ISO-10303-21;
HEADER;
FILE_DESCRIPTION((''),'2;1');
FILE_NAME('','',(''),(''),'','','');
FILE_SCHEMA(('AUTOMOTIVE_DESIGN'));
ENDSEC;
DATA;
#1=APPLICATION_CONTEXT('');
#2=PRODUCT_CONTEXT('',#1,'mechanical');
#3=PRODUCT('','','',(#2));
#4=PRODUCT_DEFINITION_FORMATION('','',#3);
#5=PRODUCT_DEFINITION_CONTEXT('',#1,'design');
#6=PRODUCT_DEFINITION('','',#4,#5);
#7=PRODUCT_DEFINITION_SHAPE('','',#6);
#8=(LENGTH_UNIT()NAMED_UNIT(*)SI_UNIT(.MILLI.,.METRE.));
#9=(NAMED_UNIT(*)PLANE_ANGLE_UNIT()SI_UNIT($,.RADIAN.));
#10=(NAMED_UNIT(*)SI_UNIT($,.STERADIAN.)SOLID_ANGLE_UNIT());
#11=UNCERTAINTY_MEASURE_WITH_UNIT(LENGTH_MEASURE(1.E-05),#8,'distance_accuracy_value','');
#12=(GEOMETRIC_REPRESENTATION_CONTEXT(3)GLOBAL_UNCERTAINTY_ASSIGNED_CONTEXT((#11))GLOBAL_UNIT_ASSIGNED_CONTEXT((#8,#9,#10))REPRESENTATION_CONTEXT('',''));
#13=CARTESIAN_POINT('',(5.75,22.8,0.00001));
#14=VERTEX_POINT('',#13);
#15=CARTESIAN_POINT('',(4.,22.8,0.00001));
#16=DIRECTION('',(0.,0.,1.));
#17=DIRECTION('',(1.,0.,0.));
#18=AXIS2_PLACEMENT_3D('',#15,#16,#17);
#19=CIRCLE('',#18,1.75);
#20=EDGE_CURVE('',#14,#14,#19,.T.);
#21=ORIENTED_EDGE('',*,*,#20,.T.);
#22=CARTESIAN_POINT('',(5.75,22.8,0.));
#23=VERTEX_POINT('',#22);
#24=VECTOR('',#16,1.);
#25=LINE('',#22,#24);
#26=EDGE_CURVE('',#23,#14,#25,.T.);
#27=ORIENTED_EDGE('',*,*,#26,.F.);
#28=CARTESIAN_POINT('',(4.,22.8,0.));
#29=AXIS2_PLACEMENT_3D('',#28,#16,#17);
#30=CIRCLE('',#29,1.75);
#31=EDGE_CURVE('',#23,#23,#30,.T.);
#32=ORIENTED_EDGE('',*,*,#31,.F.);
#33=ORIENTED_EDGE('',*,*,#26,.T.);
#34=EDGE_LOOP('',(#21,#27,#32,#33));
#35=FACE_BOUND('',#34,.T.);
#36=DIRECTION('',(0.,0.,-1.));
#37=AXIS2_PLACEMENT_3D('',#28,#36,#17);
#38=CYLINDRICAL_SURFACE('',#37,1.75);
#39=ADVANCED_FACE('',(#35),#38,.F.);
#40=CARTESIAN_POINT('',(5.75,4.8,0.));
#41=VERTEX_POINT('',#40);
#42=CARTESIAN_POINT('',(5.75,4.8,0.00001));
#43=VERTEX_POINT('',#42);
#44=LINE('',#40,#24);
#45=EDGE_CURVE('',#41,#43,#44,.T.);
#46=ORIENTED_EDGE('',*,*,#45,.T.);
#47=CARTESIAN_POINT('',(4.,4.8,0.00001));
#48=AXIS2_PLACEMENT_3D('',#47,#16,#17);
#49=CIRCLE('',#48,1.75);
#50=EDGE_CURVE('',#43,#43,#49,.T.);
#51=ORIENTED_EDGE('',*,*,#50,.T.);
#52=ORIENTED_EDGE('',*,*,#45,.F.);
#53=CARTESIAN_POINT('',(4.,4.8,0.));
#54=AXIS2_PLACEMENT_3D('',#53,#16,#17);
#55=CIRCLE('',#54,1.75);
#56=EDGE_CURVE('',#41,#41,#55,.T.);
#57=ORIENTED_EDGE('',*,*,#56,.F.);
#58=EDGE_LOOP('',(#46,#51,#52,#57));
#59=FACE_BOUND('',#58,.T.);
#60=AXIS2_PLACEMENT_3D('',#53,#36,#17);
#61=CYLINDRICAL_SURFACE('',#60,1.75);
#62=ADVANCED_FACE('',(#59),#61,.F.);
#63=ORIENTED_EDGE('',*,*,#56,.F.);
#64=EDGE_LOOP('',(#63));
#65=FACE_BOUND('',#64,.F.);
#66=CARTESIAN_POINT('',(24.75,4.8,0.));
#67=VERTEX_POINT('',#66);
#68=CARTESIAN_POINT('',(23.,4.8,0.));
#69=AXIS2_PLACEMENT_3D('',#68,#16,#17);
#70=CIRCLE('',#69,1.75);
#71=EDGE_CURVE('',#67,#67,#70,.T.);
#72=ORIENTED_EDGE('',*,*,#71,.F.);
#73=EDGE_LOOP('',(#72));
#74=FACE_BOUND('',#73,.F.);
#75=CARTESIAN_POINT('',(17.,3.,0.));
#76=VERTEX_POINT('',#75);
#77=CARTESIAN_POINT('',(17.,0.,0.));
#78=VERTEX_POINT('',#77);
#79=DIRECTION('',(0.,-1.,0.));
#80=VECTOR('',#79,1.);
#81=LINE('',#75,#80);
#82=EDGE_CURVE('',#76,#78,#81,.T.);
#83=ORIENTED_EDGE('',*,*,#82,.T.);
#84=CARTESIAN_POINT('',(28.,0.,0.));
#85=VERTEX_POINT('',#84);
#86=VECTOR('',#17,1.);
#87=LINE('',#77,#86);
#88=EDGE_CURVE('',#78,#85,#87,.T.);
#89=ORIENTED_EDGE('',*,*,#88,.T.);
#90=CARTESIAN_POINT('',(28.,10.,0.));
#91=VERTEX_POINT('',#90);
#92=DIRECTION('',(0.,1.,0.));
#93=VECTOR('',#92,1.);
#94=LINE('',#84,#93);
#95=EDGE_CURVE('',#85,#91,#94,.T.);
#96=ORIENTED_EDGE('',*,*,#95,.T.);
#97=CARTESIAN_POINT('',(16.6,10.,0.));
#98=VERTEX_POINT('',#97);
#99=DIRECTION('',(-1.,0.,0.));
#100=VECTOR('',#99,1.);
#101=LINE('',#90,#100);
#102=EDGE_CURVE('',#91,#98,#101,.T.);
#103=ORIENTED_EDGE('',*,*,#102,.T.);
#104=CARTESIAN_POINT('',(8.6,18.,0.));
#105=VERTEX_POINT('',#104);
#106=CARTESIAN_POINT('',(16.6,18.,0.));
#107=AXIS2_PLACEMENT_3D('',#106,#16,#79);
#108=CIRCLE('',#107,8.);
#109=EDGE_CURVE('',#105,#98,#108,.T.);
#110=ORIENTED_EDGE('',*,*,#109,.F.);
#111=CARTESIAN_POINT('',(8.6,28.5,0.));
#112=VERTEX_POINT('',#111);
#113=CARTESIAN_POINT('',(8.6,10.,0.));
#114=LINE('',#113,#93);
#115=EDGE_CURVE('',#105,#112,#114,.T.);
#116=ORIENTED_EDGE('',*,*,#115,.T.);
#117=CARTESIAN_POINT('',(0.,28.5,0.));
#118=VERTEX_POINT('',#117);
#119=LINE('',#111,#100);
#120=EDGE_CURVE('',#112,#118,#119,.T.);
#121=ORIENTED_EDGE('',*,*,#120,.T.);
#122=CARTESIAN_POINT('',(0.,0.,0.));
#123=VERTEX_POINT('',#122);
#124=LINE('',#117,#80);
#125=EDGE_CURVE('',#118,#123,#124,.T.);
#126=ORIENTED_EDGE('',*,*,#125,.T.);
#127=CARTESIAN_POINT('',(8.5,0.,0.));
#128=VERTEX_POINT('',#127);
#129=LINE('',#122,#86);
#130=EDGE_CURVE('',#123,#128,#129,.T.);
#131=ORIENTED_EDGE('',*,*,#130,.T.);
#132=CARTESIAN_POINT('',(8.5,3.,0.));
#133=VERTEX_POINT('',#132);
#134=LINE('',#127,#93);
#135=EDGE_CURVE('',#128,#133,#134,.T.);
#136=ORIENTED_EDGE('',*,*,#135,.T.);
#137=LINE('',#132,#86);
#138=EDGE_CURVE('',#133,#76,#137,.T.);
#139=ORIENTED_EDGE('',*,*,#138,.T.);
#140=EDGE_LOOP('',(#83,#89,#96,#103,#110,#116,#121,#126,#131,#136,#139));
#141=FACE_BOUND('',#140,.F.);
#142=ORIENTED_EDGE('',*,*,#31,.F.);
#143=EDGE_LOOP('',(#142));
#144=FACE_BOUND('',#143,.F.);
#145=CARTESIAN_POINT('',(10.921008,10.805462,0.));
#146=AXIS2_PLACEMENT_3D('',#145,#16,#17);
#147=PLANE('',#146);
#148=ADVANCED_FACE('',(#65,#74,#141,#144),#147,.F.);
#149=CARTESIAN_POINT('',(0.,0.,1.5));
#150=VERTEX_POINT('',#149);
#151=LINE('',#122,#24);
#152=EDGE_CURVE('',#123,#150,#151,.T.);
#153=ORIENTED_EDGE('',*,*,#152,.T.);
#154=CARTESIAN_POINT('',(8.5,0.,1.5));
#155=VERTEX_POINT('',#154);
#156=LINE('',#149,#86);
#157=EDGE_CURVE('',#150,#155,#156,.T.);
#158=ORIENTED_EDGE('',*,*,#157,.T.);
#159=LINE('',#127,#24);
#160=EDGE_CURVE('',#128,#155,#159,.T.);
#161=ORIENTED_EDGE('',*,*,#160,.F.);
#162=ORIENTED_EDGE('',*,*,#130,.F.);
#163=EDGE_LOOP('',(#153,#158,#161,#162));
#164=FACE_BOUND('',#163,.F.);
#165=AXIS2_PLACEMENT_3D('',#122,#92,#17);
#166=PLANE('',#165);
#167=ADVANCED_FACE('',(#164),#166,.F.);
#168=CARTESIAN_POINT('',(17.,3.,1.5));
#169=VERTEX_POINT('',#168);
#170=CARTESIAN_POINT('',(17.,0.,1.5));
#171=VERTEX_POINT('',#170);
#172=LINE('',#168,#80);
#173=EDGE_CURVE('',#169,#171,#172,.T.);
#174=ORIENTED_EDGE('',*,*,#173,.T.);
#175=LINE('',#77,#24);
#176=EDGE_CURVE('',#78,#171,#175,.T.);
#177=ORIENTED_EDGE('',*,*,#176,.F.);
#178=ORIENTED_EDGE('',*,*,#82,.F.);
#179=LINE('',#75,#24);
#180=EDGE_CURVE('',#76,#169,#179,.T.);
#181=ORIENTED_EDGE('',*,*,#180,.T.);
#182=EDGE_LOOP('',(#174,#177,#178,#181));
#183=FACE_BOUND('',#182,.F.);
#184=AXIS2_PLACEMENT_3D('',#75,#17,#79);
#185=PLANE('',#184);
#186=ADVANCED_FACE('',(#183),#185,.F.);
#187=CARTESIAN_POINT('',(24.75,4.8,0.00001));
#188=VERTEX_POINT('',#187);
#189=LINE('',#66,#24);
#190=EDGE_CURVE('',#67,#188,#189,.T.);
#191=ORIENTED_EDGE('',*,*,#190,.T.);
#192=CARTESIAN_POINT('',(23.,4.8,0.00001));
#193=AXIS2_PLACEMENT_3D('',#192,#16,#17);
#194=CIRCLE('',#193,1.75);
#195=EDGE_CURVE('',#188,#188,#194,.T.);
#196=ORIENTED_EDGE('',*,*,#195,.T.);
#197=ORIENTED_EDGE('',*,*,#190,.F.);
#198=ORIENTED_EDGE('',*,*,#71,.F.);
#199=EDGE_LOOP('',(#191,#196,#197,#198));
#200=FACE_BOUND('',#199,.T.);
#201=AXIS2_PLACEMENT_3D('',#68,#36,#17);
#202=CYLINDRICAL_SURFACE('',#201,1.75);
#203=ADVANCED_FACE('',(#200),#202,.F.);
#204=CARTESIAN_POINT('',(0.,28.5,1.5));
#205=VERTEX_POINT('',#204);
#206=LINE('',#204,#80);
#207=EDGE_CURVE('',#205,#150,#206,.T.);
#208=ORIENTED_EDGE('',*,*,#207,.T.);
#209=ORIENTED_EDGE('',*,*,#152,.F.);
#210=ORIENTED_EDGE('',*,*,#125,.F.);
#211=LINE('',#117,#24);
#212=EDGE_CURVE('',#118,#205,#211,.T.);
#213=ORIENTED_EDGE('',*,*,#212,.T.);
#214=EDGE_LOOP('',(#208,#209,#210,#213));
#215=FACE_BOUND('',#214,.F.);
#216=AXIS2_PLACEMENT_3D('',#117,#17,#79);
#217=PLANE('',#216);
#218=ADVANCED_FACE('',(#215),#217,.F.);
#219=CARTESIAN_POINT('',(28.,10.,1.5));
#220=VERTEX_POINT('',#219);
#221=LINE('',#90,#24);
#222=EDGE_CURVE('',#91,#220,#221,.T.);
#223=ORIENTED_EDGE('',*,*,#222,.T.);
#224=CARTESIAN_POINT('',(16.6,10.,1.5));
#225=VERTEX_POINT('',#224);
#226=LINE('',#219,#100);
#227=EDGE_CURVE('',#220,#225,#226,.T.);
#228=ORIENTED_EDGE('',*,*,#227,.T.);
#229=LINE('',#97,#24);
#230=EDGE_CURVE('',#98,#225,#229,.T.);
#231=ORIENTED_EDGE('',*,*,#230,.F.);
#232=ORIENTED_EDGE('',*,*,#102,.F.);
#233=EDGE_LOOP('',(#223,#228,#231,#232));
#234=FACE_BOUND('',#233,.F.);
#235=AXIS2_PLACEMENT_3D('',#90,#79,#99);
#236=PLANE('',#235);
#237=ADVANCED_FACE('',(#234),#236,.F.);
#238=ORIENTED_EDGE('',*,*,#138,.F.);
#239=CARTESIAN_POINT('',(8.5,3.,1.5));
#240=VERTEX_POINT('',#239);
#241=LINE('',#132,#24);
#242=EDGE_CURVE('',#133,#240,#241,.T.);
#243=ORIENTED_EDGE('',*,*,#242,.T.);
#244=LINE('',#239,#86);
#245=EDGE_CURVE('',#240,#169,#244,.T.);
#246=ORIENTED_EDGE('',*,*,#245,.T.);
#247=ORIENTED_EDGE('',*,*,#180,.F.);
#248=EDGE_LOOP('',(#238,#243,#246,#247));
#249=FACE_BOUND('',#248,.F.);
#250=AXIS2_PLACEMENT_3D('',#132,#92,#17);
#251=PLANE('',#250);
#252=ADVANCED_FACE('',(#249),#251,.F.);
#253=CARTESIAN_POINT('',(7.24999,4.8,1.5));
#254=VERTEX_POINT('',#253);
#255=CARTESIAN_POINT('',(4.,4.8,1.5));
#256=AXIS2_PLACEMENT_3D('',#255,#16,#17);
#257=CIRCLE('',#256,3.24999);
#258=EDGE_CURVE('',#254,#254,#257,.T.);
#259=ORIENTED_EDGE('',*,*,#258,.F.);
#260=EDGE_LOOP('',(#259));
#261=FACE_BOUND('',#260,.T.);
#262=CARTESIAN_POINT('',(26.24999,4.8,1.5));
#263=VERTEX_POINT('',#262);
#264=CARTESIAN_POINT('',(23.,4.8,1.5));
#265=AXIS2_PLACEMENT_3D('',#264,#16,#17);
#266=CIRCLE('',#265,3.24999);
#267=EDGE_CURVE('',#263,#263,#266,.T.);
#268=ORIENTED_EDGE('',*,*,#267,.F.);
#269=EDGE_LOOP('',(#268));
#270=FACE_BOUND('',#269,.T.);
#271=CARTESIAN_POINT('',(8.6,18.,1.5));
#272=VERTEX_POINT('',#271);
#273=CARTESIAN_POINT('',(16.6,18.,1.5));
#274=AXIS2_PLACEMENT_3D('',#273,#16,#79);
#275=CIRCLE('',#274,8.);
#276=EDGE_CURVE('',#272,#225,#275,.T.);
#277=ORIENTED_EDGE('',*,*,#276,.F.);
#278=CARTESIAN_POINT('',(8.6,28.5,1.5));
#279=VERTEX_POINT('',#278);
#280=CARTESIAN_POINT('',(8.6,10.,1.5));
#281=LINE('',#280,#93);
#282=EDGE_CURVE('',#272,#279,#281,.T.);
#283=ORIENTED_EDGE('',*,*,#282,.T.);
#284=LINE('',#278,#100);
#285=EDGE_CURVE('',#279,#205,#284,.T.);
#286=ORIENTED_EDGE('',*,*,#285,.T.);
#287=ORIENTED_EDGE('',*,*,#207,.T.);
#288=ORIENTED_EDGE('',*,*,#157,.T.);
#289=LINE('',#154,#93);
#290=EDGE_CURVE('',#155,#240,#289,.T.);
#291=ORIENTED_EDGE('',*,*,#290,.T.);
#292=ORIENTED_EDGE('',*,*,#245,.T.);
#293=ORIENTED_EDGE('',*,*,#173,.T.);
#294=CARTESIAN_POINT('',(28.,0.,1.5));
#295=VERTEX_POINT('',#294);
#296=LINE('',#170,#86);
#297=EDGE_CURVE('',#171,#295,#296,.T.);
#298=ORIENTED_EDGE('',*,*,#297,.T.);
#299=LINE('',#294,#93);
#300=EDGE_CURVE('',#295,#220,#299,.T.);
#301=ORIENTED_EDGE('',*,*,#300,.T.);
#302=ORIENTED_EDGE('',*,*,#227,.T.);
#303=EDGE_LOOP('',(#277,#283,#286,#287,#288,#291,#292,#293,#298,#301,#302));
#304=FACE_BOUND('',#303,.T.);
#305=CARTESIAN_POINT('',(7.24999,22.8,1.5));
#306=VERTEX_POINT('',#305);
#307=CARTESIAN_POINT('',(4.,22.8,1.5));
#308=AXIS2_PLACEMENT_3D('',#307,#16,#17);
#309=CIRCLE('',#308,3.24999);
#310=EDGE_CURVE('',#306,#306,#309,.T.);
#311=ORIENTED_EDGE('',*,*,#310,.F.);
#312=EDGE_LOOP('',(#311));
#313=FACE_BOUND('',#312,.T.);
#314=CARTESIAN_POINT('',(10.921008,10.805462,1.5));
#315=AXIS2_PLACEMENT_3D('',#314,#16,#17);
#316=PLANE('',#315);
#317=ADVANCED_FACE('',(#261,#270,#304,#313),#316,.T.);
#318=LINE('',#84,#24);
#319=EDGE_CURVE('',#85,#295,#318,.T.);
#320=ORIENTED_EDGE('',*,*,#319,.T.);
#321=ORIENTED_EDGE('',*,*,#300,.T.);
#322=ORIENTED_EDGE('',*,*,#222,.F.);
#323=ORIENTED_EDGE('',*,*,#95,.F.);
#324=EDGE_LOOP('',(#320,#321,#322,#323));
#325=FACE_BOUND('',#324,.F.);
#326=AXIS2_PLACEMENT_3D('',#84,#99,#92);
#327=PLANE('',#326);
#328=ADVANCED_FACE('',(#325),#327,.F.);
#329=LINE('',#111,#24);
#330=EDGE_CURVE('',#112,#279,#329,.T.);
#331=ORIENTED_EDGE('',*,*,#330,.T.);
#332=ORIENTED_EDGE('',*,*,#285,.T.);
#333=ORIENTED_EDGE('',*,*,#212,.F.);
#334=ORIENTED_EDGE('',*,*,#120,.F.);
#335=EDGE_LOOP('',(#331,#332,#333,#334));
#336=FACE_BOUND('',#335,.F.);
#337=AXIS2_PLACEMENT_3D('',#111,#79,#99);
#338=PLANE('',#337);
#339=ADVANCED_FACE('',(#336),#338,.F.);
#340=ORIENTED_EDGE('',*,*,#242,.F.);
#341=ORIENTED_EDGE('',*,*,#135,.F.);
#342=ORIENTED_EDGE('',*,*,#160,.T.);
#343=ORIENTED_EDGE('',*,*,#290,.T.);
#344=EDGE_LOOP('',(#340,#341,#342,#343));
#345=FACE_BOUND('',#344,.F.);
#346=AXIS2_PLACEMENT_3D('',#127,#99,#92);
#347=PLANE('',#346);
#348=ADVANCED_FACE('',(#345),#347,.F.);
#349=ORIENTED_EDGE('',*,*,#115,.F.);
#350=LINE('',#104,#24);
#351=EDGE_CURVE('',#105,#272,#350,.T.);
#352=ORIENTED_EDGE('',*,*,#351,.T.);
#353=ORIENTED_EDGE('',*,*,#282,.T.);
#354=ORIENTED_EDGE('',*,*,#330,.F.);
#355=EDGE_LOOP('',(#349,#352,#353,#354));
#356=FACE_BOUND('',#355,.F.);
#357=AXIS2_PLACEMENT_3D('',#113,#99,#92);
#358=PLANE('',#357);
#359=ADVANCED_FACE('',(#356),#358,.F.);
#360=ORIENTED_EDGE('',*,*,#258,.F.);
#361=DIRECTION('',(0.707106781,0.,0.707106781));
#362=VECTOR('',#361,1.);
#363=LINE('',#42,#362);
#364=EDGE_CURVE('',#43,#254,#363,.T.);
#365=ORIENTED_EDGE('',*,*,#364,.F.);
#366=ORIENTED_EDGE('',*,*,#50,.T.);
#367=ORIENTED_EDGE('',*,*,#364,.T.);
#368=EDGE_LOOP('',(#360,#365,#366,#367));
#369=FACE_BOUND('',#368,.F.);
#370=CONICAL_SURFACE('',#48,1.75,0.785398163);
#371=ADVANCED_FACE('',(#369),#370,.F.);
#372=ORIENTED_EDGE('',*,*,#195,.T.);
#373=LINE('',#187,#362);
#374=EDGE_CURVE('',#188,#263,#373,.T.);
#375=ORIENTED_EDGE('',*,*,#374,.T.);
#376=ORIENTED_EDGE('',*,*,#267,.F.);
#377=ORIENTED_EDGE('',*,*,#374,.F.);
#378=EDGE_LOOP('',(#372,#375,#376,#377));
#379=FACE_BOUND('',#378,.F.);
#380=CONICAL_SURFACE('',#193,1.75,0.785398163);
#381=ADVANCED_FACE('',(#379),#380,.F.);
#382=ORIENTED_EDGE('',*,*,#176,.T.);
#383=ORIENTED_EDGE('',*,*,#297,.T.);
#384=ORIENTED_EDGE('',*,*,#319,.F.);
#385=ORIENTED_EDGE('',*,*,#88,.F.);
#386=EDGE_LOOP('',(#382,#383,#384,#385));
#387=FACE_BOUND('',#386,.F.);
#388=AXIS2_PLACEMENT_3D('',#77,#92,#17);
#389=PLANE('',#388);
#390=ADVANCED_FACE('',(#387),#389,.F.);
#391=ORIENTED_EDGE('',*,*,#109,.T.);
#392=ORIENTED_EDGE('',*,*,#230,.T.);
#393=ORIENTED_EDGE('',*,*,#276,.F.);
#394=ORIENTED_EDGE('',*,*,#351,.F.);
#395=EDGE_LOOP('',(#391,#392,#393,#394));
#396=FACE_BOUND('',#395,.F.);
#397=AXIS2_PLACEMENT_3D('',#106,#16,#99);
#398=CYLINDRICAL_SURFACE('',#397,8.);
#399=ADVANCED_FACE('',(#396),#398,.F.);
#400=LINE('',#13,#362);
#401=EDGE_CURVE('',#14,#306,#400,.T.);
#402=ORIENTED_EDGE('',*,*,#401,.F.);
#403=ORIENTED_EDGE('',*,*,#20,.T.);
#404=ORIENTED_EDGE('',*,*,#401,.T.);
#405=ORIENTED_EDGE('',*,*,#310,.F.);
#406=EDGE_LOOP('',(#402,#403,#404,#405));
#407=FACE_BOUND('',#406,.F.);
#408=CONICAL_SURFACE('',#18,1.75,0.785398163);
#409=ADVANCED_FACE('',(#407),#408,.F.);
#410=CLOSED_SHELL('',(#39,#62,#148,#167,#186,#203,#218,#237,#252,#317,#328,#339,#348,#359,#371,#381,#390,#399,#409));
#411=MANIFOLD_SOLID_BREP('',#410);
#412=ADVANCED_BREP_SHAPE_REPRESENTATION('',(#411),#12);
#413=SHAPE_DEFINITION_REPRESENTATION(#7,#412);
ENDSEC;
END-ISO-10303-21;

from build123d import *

# Parameters (mm, degrees)
F0_R     = 1.75
F1_DEPTH = 1.5
F2_SIZE  = 1.49999
F3_R     = 8


# Not quite as in the source:
# - a fillet or chamfer is up to 0.001 mm smaller than in the source, because OpenCascade refuses the exact size


with BuildPart() as f1:
    # F0 (on Top) → F1 (new body)
    with BuildSketch(Plane.XY):
        Polygon((0, 28.5), (0, 0), (8.5, 0), (8.5, 3), (17, 3), (17, 0), (28, 0), (28, 10), (8.6, 10), (8.6, 28.5), align=None)
        with Locations((4, 4.8)):
            Circle(F0_R, mode=Mode.SUBTRACT)
        with Locations((23, 4.8)):
            Circle(F0_R, mode=Mode.SUBTRACT)
        with Locations((4, 22.8)):
            Circle(F0_R, mode=Mode.SUBTRACT)
    extrude(amount=F1_DEPTH)

    # F2 (size 1.5 in the source; OpenCascade refuses exactly that, so slightly less here)
    f2_edges = [f1.edges().sort_by_distance(p)[0] for p in [
        (2.25, 22.8, 1.5),
        (2.25, 4.8, 1.5),
        (21.25, 4.8, 1.5),
    ]]
    chamfer(f2_edges, length=F2_SIZE)

    # F3
    f3_edges = [f1.edges().sort_by_distance(p)[0] for p in [
        (8.6, 10, 0.75),
    ]]
    fillet(f3_edges, radius=F3_R)


solid = f1.part
